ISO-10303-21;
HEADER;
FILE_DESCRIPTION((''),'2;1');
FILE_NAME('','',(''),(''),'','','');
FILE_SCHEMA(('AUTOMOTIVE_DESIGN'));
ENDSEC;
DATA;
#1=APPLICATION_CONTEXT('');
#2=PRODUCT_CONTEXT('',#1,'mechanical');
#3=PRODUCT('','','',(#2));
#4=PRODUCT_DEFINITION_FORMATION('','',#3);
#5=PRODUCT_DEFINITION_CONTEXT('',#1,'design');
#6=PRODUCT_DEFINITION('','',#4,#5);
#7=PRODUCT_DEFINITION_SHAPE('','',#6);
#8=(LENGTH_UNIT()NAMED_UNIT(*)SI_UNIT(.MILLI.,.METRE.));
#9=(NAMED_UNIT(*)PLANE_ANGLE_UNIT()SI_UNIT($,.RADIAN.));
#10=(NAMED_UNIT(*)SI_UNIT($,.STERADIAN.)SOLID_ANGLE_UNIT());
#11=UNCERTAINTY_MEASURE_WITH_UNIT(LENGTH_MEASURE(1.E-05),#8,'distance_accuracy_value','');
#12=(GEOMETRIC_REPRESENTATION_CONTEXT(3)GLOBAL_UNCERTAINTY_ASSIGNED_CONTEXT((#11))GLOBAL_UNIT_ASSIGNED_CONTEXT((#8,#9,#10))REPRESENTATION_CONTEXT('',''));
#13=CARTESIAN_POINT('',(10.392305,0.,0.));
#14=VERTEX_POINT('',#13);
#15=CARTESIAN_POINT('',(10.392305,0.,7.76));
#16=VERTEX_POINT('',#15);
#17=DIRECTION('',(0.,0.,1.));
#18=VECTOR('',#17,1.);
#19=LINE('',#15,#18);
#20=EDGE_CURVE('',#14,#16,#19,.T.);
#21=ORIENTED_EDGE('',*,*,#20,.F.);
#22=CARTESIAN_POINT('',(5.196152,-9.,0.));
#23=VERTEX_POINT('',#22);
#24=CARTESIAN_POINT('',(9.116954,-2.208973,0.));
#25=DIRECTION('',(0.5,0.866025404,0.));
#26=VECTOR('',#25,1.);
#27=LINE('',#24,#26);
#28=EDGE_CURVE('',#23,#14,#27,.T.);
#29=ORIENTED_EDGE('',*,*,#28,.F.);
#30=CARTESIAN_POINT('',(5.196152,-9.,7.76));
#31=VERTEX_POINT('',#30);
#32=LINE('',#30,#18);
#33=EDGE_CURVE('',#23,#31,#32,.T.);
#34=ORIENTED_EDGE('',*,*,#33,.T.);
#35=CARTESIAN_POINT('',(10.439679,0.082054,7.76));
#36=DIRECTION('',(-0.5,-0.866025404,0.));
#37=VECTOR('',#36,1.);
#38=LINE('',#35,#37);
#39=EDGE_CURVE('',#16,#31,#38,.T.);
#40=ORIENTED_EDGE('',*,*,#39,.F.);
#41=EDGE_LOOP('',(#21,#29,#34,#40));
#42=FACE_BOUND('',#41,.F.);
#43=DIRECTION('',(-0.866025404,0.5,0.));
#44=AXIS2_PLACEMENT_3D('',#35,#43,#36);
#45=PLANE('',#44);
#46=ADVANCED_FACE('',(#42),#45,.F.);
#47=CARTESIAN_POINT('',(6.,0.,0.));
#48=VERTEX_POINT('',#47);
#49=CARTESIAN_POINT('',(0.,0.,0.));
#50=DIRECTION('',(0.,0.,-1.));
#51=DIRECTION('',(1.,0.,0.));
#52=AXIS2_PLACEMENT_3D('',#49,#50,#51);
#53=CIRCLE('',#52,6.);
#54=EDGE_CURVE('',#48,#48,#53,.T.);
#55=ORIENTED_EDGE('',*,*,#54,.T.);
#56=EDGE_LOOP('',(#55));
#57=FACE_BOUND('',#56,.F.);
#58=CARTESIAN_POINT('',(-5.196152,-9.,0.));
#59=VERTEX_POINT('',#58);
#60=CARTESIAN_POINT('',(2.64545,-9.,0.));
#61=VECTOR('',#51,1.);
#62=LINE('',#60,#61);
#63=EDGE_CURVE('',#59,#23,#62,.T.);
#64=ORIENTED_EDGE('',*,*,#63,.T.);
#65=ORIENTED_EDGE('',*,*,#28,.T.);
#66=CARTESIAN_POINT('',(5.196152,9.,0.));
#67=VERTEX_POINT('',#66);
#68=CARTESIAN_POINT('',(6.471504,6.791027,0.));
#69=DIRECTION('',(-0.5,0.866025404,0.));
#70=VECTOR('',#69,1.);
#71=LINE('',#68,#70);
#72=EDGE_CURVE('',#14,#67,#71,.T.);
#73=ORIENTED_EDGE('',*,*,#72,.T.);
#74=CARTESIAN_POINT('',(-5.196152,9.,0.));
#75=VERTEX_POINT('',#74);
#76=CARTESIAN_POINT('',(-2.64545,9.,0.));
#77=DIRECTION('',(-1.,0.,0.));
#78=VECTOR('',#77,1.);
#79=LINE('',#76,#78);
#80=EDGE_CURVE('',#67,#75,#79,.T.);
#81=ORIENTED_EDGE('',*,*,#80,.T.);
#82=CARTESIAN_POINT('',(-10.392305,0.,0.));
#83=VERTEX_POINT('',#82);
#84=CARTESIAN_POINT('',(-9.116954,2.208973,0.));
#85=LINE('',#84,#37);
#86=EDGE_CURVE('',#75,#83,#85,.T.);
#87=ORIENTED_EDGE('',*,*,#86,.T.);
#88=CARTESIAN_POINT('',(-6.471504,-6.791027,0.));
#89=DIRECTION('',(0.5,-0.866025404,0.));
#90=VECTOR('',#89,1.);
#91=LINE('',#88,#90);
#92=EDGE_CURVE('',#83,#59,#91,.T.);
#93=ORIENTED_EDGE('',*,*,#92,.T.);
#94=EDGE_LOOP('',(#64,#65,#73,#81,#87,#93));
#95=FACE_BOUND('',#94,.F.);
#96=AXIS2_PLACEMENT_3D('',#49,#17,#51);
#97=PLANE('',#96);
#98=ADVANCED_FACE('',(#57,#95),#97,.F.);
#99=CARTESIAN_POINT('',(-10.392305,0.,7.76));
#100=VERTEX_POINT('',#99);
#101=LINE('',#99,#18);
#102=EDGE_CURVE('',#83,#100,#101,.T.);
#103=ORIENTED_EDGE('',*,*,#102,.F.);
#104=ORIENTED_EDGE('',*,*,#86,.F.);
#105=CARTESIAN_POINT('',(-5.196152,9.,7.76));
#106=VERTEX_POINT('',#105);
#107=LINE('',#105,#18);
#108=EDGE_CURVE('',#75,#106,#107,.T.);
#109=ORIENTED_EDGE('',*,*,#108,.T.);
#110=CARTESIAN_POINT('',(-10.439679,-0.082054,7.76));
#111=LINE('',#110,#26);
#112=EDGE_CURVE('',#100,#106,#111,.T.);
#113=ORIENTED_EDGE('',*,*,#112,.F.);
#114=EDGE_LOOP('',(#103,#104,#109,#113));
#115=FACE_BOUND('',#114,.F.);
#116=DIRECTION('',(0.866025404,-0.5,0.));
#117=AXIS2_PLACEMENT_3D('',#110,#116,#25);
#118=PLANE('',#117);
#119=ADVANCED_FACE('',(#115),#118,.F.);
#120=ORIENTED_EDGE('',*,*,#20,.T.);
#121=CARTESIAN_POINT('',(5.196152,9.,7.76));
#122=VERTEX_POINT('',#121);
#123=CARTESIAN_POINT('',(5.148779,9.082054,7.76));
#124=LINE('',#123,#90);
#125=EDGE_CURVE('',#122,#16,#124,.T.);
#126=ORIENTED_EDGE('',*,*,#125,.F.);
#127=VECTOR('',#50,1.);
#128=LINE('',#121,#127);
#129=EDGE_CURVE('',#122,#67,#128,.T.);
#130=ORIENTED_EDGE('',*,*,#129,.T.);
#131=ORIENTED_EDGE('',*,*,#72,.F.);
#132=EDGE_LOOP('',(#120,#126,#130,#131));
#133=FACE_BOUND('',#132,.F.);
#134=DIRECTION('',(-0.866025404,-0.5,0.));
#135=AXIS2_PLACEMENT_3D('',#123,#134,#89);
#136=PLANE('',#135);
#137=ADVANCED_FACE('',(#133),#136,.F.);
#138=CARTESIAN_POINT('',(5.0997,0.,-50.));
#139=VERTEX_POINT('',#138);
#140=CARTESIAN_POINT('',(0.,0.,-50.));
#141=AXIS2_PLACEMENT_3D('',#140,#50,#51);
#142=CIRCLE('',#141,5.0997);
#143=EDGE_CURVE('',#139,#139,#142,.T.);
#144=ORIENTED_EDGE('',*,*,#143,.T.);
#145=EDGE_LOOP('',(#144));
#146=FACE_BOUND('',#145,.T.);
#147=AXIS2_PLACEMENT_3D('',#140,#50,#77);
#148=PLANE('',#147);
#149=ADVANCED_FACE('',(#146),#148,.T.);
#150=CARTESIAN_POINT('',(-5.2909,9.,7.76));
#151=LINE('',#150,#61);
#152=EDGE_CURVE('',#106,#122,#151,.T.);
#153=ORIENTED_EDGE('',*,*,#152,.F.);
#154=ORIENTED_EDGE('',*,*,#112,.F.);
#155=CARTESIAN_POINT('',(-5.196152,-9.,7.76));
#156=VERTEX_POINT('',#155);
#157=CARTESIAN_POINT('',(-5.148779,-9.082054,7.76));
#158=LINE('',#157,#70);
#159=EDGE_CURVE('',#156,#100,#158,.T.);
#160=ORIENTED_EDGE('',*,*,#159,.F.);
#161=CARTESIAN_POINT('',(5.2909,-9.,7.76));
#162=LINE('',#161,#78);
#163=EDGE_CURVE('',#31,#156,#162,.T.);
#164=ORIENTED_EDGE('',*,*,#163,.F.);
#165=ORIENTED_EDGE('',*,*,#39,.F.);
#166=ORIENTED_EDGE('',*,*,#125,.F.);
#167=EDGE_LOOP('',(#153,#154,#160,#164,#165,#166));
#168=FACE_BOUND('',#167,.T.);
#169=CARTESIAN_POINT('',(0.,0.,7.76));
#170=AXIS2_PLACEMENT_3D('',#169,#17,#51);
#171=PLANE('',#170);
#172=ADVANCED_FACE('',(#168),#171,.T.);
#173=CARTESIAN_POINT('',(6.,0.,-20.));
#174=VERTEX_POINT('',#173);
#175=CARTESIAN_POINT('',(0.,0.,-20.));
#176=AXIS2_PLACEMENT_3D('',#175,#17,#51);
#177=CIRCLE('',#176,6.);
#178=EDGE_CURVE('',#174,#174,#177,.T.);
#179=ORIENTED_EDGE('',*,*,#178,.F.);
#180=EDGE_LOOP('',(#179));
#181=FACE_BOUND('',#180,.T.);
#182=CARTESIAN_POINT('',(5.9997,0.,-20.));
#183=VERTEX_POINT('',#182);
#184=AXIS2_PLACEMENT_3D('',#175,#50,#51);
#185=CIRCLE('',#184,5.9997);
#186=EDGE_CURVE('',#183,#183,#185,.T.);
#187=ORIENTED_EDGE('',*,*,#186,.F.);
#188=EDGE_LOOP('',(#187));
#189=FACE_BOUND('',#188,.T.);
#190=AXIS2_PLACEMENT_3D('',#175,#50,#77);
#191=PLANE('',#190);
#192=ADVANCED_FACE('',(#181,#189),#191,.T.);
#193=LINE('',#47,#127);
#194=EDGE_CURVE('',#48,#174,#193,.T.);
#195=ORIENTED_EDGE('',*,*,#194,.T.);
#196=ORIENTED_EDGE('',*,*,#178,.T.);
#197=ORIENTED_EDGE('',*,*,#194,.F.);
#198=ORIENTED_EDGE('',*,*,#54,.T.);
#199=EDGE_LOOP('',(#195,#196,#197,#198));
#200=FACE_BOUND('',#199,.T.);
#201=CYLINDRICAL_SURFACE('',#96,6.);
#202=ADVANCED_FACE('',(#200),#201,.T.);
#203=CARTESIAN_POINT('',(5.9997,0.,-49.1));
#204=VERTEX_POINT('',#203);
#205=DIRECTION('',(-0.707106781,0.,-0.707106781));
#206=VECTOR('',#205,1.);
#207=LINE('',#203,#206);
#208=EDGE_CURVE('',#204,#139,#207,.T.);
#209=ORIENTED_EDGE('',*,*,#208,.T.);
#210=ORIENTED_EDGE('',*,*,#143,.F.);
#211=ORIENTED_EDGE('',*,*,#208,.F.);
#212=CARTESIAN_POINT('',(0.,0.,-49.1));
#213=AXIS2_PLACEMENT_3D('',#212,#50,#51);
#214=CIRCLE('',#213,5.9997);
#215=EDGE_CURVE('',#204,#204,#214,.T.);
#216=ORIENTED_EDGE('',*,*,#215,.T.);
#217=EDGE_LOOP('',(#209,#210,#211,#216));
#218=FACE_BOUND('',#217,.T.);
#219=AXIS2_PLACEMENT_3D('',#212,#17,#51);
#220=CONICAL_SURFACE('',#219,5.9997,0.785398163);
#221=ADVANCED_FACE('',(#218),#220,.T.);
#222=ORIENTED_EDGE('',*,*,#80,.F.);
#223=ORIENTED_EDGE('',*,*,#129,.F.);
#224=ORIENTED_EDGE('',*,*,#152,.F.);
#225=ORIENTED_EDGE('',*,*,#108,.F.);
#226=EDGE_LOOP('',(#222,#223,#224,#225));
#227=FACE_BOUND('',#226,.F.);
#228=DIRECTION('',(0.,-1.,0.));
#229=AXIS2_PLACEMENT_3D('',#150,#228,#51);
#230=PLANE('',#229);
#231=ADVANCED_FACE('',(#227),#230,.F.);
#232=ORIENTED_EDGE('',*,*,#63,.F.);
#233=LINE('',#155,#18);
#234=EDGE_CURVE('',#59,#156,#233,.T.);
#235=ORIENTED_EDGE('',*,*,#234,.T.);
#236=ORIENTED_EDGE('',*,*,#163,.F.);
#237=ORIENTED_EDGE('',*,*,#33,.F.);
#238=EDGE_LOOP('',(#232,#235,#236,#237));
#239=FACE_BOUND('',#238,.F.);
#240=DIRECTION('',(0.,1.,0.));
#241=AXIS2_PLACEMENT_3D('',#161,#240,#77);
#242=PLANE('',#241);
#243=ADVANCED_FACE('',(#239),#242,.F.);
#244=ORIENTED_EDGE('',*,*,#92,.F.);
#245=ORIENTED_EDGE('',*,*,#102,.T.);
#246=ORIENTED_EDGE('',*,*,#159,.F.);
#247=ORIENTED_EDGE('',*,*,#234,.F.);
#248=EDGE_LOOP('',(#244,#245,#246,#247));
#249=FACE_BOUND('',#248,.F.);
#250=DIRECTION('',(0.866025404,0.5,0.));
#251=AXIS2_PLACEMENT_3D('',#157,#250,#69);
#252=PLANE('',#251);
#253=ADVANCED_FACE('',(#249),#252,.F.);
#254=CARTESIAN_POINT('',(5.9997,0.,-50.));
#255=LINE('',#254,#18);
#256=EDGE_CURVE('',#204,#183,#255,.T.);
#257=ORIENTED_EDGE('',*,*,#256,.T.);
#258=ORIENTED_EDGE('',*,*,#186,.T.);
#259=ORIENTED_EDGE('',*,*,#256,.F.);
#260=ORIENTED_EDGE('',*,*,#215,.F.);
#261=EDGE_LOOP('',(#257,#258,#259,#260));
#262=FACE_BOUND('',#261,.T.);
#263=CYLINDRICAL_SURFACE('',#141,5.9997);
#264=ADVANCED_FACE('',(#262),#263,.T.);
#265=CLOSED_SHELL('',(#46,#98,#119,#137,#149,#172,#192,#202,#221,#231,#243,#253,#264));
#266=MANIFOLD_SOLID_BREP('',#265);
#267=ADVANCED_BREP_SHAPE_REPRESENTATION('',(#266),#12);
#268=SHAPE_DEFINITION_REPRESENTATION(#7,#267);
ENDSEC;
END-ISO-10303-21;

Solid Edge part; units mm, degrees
sketch "Sketch1" plane through (0, 0, 0) normal (0, 0, 1) x (1, 0, 0)
  circle A0 centre (0, 0) radius 10.44
  dimension "D1" = 20.88
extrude "Protrusion1" add sketch "Sketch1" along normal blind 7.76
sketch "Sketch2" plane through (0, 0, 0) normal (0, 0, -1) x (1, 0, 0)
  circle A0 centre (0, 0) radius 6
extrude "Protrusion2" add sketch "Sketch2" along normal blind 50
sketch "Sketch3" plane through (0, 0, -50) normal (0, 0, -1) x (1, 0, 0)
  circle A0 centre (0, 0) radius 5.9997
extrude "Cutout1" cut sketch "Sketch3" against normal blind 30 flip side to cut
chamfer "Chamfer_1" distance 0.9 angle 45 1 edges at (-5.9997, 0, -50)
sketch "Sketch4" plane through (0, 0, 7.76) normal (0, 0, 1) x (1, 0, 0)
  line L0 (-5.2909, 9) -> (5.2909, 9)
  dimension "D1" = 18
extrude "Cutout2" cut sketch "Sketch4" against normal up to next material side at (0, 9.05, 7.76)
pattern_circular "Pattern1" count 6 over 360 about axis through (0, 0, 7.76) along (0, 0, 1) of "Cutout2"
properties part number "24101236"
